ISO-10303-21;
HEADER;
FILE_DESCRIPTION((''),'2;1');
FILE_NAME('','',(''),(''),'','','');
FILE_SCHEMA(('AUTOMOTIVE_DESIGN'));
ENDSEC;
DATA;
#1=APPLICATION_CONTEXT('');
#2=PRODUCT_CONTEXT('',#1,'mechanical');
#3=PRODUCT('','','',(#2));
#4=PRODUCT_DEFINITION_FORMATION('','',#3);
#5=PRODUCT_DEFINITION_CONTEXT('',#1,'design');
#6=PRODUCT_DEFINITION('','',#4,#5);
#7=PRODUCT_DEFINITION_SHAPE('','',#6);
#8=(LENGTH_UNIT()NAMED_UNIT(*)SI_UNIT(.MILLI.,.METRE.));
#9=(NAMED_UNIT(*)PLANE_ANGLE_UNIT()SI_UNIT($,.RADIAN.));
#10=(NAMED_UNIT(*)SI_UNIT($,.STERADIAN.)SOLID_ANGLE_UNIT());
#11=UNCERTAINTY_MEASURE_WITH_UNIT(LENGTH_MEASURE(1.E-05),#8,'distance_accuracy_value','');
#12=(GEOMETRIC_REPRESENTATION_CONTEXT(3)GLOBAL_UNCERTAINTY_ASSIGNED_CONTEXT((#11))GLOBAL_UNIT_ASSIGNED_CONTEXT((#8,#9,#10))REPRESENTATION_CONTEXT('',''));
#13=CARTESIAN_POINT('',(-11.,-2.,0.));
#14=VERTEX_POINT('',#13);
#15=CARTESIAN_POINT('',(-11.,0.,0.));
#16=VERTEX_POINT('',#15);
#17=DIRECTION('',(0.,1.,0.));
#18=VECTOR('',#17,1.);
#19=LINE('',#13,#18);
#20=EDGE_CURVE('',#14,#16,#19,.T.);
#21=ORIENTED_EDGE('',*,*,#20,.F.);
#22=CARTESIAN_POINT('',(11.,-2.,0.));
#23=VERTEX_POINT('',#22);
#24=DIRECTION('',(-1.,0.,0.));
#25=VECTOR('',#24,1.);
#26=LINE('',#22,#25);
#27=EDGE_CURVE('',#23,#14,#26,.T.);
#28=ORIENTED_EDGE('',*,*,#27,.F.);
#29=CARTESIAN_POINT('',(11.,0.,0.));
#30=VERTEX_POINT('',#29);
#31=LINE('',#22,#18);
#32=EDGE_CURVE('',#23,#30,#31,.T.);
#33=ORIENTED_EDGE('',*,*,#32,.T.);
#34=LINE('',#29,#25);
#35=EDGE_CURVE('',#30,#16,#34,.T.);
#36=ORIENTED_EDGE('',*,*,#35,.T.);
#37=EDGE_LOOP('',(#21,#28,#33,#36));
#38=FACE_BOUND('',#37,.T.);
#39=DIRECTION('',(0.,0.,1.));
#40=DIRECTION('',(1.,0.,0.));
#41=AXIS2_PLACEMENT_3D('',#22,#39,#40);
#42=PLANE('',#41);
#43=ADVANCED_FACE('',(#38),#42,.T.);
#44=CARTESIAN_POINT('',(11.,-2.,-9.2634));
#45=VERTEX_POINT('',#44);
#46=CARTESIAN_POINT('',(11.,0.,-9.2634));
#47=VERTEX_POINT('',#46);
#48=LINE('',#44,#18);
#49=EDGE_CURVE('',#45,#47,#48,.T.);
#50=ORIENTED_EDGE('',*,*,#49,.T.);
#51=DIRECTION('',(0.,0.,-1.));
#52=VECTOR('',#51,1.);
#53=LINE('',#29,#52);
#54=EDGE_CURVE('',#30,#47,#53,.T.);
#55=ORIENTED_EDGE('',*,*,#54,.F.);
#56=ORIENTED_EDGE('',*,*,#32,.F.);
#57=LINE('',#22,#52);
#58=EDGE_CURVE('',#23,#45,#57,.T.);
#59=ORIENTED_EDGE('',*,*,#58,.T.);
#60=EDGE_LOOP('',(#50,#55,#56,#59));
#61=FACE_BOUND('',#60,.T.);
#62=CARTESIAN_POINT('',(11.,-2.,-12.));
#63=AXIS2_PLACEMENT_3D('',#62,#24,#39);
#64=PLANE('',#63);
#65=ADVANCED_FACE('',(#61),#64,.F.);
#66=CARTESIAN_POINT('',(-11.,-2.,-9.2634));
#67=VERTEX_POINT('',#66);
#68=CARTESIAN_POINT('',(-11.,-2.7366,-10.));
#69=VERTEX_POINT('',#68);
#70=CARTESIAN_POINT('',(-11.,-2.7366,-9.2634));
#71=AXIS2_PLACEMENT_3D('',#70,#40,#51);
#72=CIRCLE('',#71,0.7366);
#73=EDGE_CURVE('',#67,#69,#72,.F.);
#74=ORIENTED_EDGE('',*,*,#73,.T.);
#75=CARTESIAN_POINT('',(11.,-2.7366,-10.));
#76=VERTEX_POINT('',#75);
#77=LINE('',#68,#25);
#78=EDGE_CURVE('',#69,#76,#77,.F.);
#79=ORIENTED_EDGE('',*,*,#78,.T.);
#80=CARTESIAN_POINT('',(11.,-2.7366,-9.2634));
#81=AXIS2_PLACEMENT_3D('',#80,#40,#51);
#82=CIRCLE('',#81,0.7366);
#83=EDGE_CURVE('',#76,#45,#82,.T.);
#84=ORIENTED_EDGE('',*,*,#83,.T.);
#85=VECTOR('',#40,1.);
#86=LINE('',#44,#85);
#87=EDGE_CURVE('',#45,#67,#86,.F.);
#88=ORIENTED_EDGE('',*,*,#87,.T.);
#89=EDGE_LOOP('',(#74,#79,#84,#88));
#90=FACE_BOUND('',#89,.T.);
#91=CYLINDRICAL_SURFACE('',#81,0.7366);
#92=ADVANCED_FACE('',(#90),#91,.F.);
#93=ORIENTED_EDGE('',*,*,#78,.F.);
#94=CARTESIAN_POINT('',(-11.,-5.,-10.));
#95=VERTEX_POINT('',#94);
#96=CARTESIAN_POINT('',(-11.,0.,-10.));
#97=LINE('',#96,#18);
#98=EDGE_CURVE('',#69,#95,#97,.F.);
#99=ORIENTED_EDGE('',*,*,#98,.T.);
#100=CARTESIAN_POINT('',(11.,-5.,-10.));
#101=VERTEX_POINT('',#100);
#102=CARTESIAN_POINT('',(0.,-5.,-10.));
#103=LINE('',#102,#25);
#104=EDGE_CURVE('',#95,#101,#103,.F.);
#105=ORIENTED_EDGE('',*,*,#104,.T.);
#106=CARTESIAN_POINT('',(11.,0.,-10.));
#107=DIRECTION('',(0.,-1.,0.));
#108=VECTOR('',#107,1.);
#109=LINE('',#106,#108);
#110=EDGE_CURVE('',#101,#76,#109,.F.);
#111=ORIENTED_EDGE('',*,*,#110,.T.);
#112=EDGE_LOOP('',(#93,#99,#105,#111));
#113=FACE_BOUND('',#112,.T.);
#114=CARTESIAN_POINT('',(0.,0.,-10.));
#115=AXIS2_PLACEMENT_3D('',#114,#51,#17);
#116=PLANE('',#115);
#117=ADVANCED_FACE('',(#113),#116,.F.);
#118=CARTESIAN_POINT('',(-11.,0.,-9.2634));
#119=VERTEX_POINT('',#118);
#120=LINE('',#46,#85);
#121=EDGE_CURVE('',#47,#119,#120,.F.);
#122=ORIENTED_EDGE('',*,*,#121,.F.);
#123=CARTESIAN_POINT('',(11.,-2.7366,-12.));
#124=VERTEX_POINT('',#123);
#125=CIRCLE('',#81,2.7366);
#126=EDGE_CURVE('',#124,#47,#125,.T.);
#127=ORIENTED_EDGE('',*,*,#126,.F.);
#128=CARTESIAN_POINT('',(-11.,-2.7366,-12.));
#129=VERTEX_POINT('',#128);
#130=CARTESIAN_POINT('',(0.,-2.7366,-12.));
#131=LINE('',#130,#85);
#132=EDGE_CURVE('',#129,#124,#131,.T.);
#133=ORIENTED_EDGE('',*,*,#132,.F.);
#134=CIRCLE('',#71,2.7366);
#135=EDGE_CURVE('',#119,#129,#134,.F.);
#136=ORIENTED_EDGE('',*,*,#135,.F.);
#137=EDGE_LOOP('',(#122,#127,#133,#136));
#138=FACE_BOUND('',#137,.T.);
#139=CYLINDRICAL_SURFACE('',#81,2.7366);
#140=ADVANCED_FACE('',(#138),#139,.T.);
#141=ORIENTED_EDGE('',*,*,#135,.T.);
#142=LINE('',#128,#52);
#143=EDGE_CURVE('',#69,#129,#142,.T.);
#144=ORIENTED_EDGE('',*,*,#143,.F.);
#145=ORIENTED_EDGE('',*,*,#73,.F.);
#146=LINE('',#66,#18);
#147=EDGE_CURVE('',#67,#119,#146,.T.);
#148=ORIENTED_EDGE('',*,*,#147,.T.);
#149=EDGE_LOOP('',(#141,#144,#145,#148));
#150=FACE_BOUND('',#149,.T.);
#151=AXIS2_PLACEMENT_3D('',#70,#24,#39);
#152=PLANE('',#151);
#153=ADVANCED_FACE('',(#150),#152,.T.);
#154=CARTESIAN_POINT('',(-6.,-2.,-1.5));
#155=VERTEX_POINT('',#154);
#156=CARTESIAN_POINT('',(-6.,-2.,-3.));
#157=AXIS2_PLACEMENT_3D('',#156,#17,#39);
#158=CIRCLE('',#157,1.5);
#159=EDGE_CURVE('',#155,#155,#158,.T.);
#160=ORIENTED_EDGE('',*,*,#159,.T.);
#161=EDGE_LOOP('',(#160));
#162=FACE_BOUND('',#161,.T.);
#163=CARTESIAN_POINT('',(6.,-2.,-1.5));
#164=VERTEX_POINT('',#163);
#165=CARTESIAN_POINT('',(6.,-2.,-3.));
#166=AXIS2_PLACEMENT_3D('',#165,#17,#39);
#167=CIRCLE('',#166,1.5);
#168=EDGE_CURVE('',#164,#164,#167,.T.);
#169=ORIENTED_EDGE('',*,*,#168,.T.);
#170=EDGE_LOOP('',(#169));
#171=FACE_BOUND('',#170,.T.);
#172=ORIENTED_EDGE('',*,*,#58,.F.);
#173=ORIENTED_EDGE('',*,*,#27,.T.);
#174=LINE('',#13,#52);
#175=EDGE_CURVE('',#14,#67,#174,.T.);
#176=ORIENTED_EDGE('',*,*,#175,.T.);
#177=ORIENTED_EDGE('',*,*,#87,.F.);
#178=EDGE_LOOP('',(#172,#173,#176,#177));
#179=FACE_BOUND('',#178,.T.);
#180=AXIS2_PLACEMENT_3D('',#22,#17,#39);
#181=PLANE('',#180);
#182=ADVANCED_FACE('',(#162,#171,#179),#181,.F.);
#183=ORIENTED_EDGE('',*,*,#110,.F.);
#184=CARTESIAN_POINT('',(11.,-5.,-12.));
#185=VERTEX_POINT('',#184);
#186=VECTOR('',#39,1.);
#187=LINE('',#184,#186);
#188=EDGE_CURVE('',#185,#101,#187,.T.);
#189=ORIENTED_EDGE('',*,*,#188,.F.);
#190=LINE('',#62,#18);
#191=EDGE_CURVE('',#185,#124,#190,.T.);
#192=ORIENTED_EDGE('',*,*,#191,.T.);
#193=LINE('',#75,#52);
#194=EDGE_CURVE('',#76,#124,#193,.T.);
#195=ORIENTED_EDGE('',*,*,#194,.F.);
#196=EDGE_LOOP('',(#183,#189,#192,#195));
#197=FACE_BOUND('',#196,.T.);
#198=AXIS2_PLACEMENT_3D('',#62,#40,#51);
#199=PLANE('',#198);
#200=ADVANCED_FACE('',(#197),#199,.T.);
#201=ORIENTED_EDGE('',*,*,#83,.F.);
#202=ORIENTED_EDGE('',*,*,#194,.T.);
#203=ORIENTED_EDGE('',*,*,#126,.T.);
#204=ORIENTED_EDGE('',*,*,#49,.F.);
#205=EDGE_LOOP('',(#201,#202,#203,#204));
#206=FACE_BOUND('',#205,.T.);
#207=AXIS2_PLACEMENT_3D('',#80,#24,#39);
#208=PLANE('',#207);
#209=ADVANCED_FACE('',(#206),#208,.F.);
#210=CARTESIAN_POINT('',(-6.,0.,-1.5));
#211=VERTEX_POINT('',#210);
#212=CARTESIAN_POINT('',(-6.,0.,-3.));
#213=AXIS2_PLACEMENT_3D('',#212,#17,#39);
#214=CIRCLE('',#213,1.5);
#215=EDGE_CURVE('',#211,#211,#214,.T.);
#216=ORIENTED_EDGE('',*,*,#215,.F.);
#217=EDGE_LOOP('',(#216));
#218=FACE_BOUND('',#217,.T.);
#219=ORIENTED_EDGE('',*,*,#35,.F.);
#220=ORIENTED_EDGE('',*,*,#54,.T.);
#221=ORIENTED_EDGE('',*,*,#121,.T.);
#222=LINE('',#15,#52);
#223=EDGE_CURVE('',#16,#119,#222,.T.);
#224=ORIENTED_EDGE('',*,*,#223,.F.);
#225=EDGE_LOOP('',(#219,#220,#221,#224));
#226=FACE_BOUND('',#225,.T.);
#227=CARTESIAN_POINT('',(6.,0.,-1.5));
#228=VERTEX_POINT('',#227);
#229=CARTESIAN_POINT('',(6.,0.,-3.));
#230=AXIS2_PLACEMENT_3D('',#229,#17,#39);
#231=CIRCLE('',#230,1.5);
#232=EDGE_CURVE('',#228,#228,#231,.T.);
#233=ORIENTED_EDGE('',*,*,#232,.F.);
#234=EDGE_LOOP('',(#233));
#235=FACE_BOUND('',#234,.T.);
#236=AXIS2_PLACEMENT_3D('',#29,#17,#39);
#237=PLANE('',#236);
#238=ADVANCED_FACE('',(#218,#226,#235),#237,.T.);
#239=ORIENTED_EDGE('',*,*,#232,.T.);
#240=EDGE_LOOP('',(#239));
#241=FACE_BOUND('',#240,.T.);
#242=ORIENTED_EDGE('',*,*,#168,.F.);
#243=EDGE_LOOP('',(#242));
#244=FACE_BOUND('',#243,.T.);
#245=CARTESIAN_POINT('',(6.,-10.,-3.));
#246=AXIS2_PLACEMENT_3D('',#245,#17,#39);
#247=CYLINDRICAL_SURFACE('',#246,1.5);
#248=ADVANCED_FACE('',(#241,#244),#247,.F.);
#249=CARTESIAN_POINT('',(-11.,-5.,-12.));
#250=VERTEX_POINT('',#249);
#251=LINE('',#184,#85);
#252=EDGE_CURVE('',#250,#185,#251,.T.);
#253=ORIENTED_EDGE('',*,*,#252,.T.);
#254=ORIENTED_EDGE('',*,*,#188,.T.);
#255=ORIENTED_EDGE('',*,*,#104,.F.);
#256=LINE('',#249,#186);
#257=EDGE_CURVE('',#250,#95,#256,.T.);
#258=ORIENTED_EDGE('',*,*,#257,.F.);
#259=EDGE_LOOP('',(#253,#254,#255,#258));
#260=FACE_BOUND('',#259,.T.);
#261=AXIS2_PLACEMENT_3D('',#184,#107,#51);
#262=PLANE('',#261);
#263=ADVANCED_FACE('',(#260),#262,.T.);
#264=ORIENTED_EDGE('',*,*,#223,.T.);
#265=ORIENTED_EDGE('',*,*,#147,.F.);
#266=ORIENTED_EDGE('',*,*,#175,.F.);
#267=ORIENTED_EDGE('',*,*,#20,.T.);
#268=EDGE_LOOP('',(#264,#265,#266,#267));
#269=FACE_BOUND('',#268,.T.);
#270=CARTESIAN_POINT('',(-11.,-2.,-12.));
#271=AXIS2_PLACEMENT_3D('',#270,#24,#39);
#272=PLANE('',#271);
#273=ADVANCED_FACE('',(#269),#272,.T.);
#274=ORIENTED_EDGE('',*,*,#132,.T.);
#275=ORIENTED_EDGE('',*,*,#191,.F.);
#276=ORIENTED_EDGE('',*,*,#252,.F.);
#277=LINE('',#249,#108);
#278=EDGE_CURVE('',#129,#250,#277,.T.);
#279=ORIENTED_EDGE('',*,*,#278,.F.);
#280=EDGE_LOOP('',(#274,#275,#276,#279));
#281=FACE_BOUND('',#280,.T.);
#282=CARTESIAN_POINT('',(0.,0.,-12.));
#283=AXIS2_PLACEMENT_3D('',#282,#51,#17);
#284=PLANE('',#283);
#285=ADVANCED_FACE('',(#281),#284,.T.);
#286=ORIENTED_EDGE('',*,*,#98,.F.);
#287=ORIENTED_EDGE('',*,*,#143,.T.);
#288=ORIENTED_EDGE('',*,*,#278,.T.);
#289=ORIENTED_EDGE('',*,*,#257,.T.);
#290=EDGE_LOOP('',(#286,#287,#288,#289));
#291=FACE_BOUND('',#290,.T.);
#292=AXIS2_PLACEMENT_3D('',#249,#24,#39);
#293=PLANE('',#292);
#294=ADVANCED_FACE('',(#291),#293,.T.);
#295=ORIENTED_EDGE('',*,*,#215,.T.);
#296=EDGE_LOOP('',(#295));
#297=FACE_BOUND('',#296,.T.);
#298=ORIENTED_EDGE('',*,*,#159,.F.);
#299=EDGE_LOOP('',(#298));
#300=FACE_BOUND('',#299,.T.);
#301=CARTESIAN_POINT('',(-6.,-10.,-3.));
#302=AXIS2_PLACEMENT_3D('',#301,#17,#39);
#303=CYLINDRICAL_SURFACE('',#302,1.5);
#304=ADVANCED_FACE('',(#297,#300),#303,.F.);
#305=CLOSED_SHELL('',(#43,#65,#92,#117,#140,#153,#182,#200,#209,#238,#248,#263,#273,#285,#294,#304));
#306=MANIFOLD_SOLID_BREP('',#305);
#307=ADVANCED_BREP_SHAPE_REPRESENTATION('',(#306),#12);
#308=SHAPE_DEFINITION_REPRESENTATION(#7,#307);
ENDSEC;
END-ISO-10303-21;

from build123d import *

# Parameters (mm, degrees)
SKETCH1_W                    = 12
SKETCH1_H                    = 2
BASE_FLANGE1_DEPTH           = 11
SKETCH2_R                    = 1.5
CUT_EXTRUDE1_DEPTH           = 10
EDGE_FLANGE1_STRIP_W         = 9.4732
EDGE_FLANGE1_STRIP_H         = 2
EDGE_FLANGE1_STRIP_CUT_DEPTH = 22
EDGE_FLANGE1_DEPTH           = 22


# Sheet-metal steps are written as plain solids
with BuildPart() as part:
    # Sketch1 → Base-Flange1 (new, symmetric)
    with BuildSketch(Plane(origin=(0, 0, 0), x_dir=(0, 0, -1), z_dir=(1, 0, 0))):
        with Locations((6, -1)):
            Rectangle(SKETCH1_W, SKETCH1_H)
    extrude(amount=BASE_FLANGE1_DEPTH, both=True)

    # Sketch2 → Cut-Extrude1 (cut)
    with BuildSketch(Plane(origin=(0, 0, 0), x_dir=(1, 0, 0), z_dir=(0, 1, 0))):
        with Locations(Location((-6, 3, 0), (0, 0, 270))):
            Circle(SKETCH2_R)
        with Locations(Location((6, 3, 0), (0, 0, 270))):
            Circle(SKETCH2_R)
    extrude(amount=-CUT_EXTRUDE1_DEPTH, mode=Mode.SUBTRACT)

    # Edge-Flange1 strip (across the edge) → Edge-Flange1 strip cut (cut)
    with BuildSketch(Plane(origin=(-11, -2, -12), x_dir=(0, 0, 1), z_dir=(1, 0, 0))):
        with Locations((-2, -1)):
            Rectangle(EDGE_FLANGE1_STRIP_W, EDGE_FLANGE1_STRIP_H)
    extrude(amount=EDGE_FLANGE1_STRIP_CUT_DEPTH, mode=Mode.SUBTRACT)

    # Edge-Flange1 section (across the edge) → Edge-Flange1 (add)
    with BuildSketch(Plane(origin=(-11, -2, -12), x_dir=(0, 0, 1), z_dir=(1, 0, 0))):
        with BuildLine():
            Line((0, 0.7366), (0, 3))
            Line((0, 3), (2, 3))
            Line((2, 3), (2, 0.7366))
            ThreePointArc((2, 0.7366), (2.215745145, 0.215745145), (2.7366, 0))
            Line((2.7366, 0), (2.7366, -2))
            ThreePointArc((2.7366, -2), (0.801531583, -1.198468417), (0, 0.7366))
        make_face()
    extrude(amount=EDGE_FLANGE1_DEPTH)


solid = part.part
